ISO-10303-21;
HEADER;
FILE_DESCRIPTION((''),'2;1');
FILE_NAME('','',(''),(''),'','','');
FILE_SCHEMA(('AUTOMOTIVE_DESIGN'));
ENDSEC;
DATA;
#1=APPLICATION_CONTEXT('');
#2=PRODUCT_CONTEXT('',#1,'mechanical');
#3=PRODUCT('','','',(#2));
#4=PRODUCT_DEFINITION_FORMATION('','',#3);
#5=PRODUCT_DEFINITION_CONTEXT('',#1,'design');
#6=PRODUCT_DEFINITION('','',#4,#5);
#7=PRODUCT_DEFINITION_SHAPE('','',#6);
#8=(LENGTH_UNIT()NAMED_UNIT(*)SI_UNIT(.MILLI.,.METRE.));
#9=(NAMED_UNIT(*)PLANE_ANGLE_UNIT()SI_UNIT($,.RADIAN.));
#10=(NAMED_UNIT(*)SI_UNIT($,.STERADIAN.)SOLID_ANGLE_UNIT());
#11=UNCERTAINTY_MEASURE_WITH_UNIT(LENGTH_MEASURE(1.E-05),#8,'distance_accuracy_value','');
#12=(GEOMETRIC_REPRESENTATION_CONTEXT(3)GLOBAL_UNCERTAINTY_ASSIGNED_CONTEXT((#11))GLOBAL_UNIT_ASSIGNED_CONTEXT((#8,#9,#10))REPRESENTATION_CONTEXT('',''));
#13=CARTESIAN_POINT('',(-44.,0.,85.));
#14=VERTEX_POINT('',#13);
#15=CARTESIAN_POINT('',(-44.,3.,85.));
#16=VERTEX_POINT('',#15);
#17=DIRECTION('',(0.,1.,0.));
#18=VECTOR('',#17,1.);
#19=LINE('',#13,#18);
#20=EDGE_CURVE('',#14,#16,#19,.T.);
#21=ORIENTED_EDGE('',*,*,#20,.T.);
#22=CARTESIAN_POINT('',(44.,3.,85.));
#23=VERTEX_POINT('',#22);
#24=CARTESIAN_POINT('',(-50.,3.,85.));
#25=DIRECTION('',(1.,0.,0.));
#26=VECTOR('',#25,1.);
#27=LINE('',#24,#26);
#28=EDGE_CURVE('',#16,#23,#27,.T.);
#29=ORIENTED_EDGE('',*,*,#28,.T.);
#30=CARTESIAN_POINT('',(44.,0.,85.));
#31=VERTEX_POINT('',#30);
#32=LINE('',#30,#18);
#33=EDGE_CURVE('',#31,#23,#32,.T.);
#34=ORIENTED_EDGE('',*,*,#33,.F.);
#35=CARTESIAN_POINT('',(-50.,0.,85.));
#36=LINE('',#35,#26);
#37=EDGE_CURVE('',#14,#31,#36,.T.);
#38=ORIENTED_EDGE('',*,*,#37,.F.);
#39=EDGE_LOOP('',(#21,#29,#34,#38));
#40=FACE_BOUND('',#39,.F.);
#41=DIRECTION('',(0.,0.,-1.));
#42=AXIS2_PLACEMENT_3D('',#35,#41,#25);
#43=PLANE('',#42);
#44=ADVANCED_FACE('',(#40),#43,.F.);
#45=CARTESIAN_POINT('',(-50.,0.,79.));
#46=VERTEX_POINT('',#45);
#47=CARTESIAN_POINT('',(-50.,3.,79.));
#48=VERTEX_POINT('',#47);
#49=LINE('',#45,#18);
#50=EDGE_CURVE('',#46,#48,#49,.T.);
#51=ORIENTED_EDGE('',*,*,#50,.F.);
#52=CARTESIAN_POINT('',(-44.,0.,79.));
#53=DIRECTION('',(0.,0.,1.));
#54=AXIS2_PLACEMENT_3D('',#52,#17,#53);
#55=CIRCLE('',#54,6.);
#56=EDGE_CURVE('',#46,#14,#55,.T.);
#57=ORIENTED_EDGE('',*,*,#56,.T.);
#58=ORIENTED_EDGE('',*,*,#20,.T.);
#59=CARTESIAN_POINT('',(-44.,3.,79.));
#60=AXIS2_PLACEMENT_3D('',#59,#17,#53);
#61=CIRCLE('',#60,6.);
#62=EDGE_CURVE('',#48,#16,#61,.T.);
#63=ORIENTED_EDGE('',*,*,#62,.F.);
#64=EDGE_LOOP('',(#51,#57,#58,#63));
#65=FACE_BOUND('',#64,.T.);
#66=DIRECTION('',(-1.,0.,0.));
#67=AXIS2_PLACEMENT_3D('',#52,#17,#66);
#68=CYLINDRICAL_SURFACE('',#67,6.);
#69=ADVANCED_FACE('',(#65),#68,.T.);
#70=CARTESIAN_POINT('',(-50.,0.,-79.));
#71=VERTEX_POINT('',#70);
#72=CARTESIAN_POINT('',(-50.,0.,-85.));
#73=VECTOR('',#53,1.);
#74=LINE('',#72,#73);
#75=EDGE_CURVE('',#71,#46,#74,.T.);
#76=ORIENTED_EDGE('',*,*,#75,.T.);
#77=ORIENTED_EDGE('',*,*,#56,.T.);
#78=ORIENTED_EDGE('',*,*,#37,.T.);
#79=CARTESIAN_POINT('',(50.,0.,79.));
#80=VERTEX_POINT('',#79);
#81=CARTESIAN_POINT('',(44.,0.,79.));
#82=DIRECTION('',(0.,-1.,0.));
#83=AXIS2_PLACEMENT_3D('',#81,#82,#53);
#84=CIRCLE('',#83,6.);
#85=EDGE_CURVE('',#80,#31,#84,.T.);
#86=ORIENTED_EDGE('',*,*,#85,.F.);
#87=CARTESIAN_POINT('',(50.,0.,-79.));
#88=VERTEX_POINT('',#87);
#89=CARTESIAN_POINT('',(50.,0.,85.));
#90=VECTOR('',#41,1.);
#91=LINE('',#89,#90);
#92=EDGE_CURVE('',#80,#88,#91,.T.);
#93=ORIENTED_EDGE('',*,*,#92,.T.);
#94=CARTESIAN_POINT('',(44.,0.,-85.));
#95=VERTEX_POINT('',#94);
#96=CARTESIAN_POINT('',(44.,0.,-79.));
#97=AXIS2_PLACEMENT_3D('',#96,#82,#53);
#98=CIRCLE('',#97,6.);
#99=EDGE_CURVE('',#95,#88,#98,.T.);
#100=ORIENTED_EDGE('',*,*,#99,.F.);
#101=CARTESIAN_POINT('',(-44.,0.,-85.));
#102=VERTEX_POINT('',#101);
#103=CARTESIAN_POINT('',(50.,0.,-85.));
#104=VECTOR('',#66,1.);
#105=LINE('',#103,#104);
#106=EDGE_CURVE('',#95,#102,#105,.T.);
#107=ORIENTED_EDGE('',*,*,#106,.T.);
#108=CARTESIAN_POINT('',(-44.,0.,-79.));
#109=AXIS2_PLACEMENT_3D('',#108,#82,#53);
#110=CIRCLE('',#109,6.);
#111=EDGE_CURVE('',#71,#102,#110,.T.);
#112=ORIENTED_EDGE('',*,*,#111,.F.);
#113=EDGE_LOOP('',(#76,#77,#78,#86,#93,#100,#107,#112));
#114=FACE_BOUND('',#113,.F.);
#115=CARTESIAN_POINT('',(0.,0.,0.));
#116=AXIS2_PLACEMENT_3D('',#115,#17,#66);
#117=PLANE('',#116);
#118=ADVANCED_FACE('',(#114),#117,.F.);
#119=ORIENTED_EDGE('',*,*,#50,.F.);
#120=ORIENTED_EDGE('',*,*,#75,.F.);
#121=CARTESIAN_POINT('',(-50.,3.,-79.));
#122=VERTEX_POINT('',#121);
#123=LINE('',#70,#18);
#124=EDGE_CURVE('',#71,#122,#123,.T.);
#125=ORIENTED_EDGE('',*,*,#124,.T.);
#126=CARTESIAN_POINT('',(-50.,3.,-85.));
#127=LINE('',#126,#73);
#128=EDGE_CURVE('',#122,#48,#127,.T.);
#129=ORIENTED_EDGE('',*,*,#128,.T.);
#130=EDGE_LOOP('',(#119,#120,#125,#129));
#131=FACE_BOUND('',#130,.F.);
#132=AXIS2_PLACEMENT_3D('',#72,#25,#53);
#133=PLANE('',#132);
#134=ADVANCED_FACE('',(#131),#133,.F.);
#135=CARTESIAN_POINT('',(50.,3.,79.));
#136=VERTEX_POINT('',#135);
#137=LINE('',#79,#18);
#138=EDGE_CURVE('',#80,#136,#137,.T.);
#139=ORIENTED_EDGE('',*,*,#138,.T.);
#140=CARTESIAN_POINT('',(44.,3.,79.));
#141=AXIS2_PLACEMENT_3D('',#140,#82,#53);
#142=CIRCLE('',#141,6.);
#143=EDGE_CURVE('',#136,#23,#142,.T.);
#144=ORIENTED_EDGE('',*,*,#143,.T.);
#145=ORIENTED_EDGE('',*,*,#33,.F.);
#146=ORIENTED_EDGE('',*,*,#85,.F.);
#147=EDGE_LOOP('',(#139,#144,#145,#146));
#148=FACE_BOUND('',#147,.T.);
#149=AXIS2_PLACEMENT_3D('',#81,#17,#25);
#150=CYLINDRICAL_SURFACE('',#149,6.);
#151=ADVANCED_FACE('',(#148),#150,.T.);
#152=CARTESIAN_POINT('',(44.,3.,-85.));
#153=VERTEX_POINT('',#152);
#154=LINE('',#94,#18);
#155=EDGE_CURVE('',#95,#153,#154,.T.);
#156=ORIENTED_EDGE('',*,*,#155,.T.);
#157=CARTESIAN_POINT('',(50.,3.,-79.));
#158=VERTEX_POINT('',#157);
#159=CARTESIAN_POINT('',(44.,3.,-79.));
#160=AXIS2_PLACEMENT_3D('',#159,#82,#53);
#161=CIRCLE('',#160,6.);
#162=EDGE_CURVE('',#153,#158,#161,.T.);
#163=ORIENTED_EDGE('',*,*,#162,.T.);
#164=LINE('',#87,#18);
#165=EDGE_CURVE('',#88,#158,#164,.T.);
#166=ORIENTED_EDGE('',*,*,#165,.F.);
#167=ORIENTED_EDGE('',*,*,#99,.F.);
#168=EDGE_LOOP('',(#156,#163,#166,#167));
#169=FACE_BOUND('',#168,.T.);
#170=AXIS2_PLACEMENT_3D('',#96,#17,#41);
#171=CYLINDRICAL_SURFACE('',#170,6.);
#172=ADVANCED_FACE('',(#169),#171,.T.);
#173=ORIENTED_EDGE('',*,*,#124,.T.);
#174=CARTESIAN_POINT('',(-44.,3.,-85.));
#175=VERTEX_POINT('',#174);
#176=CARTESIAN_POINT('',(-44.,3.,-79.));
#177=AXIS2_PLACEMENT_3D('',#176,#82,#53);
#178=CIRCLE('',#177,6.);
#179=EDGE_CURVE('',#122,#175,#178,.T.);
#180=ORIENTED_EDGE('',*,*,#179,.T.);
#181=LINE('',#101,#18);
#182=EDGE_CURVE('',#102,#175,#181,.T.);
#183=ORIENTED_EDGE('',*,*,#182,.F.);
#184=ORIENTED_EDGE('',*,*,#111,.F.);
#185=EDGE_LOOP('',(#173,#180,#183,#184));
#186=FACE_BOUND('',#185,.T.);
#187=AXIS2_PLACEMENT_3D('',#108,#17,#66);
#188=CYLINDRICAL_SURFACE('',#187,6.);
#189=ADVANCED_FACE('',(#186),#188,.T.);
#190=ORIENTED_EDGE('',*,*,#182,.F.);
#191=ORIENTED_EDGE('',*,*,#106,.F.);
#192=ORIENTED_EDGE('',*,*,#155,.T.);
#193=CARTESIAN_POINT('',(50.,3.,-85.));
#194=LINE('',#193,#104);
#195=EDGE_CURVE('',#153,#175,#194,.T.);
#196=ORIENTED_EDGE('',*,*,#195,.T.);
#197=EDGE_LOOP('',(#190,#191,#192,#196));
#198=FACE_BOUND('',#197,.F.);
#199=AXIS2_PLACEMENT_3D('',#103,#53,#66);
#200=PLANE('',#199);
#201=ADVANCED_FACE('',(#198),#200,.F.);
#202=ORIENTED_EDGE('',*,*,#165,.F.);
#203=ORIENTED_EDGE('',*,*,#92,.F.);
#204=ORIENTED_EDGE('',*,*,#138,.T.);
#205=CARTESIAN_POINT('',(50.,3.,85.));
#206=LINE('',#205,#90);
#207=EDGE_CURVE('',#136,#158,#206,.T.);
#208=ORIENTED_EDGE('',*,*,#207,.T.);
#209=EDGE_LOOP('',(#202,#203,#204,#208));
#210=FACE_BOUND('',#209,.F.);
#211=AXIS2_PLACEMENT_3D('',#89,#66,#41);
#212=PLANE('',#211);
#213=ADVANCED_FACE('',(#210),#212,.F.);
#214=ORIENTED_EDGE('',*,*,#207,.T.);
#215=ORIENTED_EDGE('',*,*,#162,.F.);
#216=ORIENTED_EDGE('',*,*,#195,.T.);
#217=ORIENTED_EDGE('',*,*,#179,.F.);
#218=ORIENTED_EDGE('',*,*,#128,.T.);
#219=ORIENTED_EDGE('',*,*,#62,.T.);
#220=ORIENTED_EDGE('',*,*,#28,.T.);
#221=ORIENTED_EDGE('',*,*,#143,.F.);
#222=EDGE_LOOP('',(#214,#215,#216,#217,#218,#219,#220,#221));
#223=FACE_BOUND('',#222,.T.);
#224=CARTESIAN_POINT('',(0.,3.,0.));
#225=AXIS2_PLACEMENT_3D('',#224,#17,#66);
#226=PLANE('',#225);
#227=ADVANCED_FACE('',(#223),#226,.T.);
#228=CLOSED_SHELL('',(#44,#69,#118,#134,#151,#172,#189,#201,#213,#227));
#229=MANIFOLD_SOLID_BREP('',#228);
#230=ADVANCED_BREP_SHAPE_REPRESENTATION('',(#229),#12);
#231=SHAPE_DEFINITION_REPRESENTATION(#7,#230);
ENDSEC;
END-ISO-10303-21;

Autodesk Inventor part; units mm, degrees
ref_plane "YZ Plane" through (0, 0, 0) normal (1, 0, 0) x (0, 1, 0)
ref_plane "XZ Plane" through (0, 0, 0) normal (0, 1, 0) x (-1, 0, 0)
ref_plane "XY Plane" through (0, 0, 0) normal (0, 0, 1) x (1, 0, 0)
sketch "Sketch1" plane through (0, 0, 0) normal (0, 1, 0) x (-1, 0, 0)
  line L0 (50, 85) -> (-50, 85)
  line L1 (-50, 85) -> (-50, -85)
  line L2 (-50, -85) -> (50, -85)
  line L3 (50, -85) -> (50, 85)
  line L4 (50, 85) -> (-50, -85) construction
  point P0 (0, 0)
  point P1 (0, 0)
  dimension "d0" = 100
  dimension "d1" = 170
extrude "Plate1" add sketch "Sketch1" along normal blind 3
fillet "Corner Round1" radius 6 4 edges at (50, 1.5, 85) (-50, 1.5, 85) (50, 1.5, -85) (-50, 1.5, -85)
equation "\"BendReliefWidth\" = Thickness"
equation "\"BendReliefDepth\" = 0.5 * Thickness"
equation "\"CornerReliefSize\" = 4 * Thickness"
equation "\"MinimumRemnant\" = 2 * Thickness"
equation "\"TransitionRadius\" = BendRadius"
equation "\"JacobiRadiusSize\" = BendRadius"
equation "\"GapSize\" = Thickness"
properties part number "MSC 905 flange base tube support" material "Stainless Steel"
